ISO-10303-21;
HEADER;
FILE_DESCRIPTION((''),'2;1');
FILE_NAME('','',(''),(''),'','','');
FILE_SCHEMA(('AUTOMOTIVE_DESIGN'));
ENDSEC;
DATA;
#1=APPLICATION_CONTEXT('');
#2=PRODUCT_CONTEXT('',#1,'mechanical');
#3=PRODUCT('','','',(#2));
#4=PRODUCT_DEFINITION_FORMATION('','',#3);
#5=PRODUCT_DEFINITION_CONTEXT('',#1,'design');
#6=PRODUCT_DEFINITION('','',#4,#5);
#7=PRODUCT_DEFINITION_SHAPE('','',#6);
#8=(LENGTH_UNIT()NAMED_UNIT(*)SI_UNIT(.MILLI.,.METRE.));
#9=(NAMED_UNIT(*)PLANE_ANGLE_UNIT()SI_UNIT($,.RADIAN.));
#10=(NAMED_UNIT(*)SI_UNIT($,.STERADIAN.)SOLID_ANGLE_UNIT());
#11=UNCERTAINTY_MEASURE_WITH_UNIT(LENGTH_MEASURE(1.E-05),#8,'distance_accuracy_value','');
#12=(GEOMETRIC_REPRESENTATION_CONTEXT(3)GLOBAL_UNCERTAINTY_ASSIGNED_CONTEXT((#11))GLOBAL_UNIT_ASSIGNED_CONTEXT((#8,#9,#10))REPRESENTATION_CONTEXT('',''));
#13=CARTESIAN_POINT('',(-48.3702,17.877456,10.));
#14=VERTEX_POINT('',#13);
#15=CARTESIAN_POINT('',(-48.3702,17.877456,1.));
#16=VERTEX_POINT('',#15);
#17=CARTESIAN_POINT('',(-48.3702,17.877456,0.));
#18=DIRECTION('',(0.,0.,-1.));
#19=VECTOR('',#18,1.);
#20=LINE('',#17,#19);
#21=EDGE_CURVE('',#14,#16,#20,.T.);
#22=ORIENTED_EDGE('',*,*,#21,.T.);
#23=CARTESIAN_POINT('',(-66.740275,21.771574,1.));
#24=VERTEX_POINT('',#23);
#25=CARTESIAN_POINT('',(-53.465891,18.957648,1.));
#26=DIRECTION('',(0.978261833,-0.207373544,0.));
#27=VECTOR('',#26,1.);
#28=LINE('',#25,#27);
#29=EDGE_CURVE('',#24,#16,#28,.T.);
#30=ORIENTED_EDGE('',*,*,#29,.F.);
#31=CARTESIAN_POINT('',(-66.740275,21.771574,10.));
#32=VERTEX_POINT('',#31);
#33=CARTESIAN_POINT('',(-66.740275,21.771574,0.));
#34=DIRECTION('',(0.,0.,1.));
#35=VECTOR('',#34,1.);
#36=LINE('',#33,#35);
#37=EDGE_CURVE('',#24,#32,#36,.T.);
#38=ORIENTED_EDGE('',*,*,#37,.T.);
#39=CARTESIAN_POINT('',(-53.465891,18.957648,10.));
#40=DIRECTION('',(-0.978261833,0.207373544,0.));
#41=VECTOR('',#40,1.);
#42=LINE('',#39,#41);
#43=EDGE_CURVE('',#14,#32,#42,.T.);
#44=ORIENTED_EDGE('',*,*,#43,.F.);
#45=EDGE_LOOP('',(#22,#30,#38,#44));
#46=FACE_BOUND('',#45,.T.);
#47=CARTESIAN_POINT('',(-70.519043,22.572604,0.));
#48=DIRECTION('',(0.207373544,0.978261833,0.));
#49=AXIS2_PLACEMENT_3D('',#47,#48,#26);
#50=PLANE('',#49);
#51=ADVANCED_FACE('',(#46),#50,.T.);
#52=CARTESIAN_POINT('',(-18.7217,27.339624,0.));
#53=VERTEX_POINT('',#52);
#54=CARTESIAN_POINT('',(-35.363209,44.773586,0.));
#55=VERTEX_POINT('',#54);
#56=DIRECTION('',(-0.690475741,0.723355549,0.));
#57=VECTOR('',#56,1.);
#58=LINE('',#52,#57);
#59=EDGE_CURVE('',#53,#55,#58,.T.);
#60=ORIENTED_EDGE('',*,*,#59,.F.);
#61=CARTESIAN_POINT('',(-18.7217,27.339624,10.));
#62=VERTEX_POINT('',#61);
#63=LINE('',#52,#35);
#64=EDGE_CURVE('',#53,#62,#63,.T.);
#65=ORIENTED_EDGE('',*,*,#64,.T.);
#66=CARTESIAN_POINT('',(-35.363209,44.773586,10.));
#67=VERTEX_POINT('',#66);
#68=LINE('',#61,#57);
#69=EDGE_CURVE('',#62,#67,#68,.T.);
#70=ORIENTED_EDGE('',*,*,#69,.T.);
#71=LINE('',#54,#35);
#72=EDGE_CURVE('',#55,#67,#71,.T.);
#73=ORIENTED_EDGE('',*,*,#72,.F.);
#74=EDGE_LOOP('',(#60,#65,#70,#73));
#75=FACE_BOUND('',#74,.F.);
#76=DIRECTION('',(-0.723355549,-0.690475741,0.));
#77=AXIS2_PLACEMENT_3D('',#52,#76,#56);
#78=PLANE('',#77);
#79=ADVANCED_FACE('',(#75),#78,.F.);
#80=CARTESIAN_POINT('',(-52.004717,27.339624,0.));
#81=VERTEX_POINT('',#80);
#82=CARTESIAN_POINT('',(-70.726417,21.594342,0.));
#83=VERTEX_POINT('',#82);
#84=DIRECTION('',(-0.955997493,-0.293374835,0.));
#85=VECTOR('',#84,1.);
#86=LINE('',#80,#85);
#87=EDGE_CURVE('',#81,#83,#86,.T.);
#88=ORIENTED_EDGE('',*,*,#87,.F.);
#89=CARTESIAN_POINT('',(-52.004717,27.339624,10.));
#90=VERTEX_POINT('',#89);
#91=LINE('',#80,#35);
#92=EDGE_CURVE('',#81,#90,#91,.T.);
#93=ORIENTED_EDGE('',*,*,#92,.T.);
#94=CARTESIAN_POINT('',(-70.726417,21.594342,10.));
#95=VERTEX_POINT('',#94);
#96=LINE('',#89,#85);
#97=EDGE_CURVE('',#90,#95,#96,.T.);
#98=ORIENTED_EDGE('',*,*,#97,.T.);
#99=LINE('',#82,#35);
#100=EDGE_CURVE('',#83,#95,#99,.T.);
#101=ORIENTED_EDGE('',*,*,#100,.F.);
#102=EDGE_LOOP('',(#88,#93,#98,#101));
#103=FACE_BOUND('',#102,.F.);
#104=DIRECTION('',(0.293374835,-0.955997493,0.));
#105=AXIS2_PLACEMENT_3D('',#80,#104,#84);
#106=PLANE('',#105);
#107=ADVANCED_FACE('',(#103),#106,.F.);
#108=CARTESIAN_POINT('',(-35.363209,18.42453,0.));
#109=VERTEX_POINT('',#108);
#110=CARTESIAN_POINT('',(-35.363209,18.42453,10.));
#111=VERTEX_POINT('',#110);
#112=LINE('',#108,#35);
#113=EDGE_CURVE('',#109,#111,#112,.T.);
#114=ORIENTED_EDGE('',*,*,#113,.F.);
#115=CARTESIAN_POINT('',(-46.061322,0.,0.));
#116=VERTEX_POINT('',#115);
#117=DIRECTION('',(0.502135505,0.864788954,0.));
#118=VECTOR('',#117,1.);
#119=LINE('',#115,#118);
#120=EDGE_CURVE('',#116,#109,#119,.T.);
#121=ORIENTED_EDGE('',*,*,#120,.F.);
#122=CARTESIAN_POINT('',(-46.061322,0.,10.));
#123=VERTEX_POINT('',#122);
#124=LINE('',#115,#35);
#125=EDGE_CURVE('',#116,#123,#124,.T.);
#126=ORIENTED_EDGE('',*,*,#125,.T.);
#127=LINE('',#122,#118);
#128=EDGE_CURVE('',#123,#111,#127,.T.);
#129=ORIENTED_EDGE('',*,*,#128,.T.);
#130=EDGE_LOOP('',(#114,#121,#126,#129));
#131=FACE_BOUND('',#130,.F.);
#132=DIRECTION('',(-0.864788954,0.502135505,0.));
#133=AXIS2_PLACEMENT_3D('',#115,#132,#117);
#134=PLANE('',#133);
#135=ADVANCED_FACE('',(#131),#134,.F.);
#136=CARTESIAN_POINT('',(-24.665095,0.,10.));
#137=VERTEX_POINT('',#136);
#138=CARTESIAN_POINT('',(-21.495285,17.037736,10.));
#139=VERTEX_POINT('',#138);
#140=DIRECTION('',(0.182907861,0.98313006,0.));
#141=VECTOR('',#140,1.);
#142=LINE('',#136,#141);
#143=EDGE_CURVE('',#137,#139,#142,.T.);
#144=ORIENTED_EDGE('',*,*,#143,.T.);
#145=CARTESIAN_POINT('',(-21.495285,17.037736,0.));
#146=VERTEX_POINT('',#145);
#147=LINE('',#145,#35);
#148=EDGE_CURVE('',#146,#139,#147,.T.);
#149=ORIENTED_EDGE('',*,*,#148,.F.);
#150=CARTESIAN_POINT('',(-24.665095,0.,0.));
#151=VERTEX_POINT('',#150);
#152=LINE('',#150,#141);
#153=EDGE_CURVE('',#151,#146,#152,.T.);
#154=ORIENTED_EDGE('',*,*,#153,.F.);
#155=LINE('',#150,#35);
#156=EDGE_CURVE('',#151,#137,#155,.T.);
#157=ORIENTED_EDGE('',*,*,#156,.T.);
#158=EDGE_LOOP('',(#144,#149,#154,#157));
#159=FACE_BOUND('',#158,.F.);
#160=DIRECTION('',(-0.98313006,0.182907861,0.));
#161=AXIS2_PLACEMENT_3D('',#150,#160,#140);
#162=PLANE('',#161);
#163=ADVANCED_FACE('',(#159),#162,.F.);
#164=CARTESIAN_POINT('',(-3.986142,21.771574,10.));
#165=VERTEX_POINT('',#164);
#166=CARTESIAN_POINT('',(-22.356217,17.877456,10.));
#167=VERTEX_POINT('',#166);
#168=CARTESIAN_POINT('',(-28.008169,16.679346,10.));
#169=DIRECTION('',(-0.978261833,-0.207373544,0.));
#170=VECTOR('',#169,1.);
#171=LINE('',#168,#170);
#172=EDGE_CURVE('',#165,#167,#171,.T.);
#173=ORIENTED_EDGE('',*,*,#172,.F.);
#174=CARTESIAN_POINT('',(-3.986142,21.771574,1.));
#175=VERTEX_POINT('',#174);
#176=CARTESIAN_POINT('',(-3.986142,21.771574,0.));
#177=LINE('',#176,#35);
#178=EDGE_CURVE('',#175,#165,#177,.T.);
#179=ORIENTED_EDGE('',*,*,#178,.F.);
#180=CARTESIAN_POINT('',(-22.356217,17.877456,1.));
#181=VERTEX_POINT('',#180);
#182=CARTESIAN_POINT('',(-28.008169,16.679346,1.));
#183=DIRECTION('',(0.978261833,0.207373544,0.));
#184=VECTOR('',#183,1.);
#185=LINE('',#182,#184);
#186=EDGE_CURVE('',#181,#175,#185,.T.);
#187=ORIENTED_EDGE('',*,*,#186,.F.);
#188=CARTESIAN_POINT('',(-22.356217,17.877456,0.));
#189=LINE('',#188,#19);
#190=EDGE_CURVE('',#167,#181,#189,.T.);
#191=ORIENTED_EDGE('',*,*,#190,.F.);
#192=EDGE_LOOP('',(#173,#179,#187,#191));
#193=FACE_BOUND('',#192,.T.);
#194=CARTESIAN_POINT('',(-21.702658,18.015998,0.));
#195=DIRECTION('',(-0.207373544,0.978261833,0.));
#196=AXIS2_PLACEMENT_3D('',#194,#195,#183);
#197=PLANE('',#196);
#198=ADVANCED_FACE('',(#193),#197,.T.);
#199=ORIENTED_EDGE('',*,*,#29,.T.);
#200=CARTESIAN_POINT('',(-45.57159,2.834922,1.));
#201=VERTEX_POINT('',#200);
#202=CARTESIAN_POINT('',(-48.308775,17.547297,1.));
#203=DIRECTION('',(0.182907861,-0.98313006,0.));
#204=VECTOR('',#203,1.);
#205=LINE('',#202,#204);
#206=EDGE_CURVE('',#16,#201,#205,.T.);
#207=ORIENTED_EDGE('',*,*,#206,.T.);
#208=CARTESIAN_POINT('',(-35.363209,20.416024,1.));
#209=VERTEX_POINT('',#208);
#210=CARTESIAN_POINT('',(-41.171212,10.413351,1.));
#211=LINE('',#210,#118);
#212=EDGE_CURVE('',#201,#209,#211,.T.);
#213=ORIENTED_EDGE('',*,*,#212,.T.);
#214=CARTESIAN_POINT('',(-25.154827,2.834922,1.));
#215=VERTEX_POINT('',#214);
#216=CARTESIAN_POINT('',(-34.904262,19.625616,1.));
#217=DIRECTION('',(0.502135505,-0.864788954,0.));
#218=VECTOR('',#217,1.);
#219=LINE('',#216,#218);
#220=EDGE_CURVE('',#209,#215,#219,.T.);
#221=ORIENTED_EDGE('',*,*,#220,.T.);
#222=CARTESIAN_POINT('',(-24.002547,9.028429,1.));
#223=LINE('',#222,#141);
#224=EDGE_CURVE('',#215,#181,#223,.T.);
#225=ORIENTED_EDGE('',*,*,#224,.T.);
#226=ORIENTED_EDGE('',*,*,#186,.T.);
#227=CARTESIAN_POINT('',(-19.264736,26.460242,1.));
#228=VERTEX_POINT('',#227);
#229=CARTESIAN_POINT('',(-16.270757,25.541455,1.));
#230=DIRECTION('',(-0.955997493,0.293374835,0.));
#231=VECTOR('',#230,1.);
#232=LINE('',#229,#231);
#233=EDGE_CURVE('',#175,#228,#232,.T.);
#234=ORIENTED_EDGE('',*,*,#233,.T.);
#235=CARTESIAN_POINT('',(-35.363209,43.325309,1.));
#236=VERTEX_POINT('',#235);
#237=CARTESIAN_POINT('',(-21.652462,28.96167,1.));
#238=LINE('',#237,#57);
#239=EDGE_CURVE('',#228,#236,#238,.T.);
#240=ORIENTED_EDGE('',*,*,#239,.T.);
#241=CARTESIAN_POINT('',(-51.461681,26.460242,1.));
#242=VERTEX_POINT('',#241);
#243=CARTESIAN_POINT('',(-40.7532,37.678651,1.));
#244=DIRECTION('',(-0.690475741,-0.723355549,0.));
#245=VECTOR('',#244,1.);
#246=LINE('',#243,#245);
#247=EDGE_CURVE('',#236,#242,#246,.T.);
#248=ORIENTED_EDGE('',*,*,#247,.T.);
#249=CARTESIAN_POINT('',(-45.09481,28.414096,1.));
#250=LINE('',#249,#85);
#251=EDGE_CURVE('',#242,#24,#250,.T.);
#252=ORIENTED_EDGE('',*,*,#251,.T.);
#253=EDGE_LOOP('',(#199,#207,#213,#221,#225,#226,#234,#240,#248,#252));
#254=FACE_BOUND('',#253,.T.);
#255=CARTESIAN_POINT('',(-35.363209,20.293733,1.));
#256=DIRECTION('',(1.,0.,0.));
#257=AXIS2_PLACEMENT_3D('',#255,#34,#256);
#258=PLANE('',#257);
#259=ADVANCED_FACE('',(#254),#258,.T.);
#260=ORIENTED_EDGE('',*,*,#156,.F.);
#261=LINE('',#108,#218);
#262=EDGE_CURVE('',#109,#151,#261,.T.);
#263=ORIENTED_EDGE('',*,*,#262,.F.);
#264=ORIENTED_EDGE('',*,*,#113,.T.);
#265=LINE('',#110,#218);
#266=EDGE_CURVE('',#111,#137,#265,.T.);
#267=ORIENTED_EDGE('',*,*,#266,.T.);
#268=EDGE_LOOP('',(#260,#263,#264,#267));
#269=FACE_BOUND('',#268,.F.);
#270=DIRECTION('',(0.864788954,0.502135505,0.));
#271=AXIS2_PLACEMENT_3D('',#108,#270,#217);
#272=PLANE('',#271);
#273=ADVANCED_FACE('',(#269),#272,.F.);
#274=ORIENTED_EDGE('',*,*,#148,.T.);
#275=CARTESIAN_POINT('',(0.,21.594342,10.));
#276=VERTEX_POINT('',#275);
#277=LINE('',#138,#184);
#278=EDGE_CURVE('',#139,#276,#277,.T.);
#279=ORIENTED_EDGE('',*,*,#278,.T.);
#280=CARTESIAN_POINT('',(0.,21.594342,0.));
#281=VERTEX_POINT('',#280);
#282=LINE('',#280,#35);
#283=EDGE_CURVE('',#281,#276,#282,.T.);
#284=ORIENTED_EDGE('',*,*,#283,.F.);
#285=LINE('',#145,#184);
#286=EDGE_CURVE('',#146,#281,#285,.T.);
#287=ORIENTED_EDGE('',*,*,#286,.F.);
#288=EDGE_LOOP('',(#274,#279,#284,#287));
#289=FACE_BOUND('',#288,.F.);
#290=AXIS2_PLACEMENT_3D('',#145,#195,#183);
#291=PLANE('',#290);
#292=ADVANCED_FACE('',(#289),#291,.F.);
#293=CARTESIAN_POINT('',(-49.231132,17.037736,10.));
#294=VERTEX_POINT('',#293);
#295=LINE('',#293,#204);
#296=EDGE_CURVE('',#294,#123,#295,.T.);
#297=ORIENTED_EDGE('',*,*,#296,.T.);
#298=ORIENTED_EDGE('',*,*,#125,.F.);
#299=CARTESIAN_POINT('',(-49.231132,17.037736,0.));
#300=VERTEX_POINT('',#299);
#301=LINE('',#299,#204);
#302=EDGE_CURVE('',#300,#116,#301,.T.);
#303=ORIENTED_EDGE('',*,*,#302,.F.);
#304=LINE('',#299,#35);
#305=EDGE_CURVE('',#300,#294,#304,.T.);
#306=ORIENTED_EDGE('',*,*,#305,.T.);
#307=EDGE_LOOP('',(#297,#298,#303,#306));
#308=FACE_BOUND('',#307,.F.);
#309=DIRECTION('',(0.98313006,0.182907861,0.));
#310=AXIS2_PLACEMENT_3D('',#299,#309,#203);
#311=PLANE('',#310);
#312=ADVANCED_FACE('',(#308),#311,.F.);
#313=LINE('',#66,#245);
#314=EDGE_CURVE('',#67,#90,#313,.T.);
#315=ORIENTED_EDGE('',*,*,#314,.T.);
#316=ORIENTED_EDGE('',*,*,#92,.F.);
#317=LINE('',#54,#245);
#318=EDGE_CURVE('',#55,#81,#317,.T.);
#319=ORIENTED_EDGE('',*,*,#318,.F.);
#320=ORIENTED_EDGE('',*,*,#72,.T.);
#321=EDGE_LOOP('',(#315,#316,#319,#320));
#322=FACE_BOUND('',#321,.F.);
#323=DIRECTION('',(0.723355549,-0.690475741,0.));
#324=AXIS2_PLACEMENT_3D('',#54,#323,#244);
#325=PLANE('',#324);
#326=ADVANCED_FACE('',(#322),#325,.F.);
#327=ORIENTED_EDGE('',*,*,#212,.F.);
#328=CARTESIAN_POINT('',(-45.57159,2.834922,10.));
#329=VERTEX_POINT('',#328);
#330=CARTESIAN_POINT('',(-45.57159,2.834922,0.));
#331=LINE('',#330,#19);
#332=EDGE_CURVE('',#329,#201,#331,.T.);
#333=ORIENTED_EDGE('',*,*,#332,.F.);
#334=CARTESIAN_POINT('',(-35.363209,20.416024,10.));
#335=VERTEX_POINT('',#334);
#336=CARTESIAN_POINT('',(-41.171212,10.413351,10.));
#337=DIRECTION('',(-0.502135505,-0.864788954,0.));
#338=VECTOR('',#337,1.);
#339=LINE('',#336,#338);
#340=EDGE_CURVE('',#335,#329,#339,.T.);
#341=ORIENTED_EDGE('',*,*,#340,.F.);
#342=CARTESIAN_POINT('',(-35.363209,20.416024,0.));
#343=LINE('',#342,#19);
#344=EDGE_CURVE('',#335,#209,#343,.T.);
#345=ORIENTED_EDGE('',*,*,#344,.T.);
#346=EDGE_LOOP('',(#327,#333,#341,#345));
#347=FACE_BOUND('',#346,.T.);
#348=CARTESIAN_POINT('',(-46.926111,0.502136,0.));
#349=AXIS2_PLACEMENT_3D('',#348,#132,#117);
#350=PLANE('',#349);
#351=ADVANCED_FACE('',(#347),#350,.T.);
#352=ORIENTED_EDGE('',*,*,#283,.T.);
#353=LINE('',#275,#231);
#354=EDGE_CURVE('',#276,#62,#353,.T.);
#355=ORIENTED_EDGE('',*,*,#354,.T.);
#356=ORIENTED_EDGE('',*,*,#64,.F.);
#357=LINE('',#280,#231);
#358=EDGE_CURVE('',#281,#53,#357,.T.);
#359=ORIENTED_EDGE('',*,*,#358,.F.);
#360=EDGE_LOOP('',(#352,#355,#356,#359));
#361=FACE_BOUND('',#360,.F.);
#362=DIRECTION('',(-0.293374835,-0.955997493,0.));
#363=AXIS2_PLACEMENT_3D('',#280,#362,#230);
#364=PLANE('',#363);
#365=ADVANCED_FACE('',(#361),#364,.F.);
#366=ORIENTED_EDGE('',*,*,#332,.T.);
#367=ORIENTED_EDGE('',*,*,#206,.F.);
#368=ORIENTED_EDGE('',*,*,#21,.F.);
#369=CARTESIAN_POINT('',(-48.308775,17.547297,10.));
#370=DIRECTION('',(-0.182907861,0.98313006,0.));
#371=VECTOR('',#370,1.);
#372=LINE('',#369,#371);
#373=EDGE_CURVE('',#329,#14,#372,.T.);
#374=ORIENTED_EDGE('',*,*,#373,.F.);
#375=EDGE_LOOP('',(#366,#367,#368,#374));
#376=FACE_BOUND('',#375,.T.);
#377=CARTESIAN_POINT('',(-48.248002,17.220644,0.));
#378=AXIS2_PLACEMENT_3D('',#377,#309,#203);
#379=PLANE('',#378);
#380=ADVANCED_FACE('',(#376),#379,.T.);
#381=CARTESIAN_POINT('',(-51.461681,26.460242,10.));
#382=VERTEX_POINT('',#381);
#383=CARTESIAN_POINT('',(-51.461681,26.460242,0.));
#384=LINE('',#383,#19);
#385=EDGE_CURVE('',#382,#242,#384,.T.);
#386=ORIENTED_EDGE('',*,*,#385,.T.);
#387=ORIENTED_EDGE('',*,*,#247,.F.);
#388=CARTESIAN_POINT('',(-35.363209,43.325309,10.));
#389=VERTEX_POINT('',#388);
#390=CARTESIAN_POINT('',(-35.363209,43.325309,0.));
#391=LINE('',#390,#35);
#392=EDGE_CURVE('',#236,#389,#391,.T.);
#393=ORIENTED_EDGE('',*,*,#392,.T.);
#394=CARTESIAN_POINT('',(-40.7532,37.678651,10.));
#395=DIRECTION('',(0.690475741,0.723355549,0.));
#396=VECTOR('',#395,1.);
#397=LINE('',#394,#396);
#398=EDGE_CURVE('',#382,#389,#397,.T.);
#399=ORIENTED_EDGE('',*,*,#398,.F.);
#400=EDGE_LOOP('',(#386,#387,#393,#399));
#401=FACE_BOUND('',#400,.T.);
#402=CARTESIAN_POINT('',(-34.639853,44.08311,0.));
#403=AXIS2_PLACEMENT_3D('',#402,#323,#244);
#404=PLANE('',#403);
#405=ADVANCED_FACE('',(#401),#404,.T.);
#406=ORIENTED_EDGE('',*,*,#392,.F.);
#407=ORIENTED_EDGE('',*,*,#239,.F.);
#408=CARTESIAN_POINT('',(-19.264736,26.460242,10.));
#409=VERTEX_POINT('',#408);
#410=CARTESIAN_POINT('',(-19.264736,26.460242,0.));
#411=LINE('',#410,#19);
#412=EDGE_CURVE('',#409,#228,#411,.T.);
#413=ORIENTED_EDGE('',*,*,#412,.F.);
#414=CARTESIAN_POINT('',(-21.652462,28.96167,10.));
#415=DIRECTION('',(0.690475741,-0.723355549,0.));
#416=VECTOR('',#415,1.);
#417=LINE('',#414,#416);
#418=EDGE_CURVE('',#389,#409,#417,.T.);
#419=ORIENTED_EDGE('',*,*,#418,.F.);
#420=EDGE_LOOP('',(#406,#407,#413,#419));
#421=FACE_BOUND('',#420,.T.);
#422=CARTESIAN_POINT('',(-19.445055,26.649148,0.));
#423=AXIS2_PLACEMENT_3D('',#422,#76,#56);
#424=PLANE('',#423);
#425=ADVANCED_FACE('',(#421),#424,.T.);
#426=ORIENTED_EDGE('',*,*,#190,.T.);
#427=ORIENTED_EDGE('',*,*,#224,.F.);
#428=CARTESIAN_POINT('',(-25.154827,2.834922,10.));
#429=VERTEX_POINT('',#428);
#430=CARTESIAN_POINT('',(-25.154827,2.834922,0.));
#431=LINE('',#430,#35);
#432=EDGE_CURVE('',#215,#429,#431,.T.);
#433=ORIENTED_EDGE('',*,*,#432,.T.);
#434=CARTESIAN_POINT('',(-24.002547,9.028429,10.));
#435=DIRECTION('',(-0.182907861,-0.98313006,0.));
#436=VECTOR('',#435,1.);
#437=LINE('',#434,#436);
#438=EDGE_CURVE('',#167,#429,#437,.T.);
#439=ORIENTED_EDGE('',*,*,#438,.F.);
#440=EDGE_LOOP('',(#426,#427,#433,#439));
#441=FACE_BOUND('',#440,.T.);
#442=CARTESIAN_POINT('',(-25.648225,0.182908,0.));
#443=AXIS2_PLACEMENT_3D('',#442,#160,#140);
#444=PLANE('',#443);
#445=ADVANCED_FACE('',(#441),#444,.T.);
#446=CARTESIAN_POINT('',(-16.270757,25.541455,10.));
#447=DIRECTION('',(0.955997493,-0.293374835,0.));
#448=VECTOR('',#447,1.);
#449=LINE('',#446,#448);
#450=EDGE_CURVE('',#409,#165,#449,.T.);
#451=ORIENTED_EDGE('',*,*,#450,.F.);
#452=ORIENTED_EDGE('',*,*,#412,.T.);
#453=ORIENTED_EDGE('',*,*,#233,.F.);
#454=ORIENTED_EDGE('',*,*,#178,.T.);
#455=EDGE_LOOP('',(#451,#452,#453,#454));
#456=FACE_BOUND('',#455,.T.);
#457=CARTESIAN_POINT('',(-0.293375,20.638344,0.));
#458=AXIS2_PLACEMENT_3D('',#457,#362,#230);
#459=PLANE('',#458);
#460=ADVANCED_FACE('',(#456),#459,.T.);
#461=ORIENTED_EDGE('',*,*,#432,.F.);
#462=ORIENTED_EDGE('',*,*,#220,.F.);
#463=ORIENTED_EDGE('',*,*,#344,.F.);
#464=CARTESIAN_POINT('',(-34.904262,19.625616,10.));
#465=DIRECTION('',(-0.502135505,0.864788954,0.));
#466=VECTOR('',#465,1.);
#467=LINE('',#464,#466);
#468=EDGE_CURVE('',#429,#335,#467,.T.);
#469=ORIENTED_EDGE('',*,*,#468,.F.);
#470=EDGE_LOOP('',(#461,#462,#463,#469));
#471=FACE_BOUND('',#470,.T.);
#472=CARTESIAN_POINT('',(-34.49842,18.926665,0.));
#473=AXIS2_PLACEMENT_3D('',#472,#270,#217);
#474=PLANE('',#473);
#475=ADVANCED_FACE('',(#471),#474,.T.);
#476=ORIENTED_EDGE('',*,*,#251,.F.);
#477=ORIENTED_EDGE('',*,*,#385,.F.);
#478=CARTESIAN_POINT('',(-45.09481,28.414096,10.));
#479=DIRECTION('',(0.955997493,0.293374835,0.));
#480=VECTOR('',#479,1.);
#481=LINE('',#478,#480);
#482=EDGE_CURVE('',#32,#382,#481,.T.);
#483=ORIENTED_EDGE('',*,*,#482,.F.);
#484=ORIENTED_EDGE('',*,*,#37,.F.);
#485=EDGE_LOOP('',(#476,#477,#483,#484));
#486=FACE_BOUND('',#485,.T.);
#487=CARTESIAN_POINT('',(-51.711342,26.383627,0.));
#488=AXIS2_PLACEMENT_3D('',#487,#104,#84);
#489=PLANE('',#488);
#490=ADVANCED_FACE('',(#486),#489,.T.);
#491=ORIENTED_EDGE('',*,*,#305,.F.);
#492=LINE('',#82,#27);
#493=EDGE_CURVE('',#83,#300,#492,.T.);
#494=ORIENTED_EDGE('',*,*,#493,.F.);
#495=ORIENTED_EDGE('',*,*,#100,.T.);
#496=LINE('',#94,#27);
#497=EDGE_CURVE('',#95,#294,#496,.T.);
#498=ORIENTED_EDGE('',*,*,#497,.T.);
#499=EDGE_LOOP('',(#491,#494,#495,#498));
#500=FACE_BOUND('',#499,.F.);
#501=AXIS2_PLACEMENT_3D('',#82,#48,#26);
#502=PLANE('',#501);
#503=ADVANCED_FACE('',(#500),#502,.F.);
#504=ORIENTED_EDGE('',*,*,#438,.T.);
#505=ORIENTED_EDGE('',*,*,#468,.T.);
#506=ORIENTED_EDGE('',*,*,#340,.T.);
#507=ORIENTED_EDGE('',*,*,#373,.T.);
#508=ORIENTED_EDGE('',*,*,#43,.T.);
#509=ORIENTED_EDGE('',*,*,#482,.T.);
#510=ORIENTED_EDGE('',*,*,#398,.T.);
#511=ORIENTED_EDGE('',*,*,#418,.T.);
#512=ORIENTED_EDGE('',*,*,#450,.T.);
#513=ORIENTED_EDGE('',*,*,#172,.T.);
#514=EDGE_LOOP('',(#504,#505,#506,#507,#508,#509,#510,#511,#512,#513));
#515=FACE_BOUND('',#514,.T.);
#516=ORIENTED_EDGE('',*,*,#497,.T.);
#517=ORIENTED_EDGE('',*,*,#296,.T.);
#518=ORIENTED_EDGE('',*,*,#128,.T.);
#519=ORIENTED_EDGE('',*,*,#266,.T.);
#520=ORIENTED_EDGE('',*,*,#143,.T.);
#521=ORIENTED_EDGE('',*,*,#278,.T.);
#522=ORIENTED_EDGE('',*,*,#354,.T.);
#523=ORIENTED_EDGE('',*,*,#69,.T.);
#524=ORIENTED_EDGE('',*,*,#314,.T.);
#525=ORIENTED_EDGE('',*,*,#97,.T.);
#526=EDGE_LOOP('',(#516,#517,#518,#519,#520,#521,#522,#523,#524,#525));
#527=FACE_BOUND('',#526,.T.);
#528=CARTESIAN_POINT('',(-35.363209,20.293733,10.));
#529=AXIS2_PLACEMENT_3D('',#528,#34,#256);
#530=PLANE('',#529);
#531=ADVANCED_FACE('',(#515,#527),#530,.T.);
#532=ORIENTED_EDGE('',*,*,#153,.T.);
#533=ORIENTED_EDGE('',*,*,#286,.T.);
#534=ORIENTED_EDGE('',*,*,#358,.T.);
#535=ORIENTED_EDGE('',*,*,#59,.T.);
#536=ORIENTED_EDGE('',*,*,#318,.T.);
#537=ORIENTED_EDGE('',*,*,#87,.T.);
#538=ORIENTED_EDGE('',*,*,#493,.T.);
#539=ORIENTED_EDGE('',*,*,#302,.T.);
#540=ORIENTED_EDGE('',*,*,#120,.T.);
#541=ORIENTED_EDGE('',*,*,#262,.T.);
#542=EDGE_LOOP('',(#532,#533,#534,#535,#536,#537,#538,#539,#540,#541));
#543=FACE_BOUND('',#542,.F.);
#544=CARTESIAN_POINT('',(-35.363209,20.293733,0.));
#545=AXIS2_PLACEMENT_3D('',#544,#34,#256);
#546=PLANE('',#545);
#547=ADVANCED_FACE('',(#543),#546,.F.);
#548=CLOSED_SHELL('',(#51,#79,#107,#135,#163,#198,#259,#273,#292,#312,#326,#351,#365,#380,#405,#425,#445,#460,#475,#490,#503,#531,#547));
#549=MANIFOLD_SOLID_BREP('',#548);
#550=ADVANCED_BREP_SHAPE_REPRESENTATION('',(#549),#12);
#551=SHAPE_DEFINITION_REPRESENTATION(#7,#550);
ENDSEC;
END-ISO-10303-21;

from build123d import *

# Parameters (mm, degrees)
F1_DEPTH = 10
F2_T     = -1


with BuildPart() as f1:
    # F0 (on Top) → F1 (new body)
    with BuildSketch(Plane.XY):
        Polygon((-46.061322093, 0), (-35.3632085025, 18.4245295823), (-24.6650949121, 0), (-21.4952845126, 17.037736252), (0, 21.5943418443), (-18.7216997147, 27.339624241), (-35.3632085025, 44.7735860944), (-52.0047172904, 27.339624241), (-70.7264170051, 21.5943418443), (-49.2311324924, 17.037736252), align=None)
    extrude(amount=F1_DEPTH)

    # F2
    f2_openings = [f1.faces().sort_by_distance(p)[0] for p in [
        (-35.363209, 22.945466, 10),
    ]]
    offset(amount=F2_T, openings=f2_openings, kind=Kind.INTERSECTION)


solid = f1.part
